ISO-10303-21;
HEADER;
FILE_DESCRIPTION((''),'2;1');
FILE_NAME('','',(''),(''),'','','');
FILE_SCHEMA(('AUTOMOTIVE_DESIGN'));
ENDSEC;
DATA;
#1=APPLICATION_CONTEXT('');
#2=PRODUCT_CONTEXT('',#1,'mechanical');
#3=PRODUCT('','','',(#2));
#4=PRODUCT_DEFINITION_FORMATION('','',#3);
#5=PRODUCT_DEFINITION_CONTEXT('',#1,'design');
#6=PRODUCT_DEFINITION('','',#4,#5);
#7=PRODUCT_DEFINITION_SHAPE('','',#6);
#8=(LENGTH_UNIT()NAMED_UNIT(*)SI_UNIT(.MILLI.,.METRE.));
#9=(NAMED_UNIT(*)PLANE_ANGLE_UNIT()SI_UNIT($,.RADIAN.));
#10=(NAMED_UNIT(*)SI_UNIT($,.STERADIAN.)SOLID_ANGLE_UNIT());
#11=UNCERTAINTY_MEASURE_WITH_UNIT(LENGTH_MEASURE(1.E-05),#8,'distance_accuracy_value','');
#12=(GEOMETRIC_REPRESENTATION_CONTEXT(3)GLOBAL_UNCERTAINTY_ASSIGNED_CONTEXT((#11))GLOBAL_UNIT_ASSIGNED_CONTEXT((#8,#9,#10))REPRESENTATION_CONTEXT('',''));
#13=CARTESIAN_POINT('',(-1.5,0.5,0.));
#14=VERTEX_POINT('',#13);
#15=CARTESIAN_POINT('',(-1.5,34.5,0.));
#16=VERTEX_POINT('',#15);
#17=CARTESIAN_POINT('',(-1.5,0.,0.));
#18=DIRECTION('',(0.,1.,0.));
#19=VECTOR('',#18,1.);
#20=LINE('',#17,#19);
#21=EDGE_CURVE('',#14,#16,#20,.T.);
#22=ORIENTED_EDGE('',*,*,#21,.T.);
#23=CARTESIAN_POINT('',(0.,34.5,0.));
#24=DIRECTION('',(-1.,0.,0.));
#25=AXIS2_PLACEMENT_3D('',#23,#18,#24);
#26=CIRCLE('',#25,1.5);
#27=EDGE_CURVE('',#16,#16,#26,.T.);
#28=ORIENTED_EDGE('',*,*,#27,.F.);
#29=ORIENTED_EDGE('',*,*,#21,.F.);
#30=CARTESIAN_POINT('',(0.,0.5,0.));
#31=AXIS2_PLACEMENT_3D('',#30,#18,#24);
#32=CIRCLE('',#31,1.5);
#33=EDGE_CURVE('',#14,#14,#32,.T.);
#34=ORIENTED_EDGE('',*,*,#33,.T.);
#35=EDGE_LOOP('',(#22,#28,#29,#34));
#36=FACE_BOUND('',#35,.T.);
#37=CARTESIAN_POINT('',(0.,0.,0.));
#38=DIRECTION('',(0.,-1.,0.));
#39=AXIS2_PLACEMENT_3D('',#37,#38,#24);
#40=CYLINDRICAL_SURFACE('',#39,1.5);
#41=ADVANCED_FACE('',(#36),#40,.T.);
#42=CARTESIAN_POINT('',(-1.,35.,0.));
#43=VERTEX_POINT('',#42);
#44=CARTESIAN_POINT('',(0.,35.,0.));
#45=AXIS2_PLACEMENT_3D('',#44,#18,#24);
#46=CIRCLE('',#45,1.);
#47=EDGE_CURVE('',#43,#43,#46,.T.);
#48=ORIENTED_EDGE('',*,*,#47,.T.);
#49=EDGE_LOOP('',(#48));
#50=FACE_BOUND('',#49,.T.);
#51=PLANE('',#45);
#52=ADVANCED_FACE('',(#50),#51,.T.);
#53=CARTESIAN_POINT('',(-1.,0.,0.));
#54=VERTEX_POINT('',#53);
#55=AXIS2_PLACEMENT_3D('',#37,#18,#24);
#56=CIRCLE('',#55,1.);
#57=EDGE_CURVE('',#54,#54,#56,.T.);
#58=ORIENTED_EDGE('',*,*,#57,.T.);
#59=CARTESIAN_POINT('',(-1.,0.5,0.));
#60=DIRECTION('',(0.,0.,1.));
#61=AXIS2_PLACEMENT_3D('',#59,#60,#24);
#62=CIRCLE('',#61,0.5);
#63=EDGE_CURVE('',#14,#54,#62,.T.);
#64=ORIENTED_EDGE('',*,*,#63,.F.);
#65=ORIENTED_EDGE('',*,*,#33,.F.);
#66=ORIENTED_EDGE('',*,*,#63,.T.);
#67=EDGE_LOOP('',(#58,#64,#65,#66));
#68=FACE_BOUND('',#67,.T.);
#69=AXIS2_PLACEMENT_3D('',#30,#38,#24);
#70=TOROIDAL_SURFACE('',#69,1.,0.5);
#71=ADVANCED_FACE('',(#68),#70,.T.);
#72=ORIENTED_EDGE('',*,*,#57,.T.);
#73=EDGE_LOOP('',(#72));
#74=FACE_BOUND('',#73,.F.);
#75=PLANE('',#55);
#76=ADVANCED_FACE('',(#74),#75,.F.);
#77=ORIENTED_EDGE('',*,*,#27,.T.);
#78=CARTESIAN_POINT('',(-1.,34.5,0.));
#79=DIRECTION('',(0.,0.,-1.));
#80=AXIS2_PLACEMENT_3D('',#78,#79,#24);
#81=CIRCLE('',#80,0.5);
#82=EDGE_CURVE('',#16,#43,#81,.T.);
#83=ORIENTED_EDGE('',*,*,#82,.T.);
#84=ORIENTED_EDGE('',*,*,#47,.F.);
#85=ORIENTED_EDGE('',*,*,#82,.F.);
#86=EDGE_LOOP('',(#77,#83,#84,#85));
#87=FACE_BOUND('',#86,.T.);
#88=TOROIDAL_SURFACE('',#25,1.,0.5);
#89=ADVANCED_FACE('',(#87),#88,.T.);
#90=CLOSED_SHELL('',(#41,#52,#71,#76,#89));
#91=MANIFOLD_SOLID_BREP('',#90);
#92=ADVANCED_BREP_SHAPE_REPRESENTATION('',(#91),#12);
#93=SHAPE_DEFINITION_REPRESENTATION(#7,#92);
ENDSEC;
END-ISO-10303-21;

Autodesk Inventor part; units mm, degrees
ref_plane "YZ Plane" through (0, 0, 0) normal (1, 0, 0) x (0, 1, 0)
ref_plane "XZ Plane" through (0, 0, 0) normal (0, 1, 0) x (-1, 0, 0)
ref_plane "XY Plane" through (0, 0, 0) normal (0, 0, 1) x (1, 0, 0)
sketch "Sketch1" plane through (0, 0, 0) normal (0, 1, 0) x (-1, 0, 0)
  circle A0 centre (0, 0) radius 1.5
  dimension "d0" = 3
extrude "Extrusion1" add sketch "Sketch1" along normal blind 35
fillet "Fillet1" radius 0.5 2 edges at (1.5, 35, 0) (1.5, 0, 0)
thread "Thread1" size "M3x0.5" class "6g" standard "ISO Metric profile" length 10
thread "Thread2" size "M3x0.5" class "6g" standard "ISO Metric profile" length 5
properties part number "19.2"
